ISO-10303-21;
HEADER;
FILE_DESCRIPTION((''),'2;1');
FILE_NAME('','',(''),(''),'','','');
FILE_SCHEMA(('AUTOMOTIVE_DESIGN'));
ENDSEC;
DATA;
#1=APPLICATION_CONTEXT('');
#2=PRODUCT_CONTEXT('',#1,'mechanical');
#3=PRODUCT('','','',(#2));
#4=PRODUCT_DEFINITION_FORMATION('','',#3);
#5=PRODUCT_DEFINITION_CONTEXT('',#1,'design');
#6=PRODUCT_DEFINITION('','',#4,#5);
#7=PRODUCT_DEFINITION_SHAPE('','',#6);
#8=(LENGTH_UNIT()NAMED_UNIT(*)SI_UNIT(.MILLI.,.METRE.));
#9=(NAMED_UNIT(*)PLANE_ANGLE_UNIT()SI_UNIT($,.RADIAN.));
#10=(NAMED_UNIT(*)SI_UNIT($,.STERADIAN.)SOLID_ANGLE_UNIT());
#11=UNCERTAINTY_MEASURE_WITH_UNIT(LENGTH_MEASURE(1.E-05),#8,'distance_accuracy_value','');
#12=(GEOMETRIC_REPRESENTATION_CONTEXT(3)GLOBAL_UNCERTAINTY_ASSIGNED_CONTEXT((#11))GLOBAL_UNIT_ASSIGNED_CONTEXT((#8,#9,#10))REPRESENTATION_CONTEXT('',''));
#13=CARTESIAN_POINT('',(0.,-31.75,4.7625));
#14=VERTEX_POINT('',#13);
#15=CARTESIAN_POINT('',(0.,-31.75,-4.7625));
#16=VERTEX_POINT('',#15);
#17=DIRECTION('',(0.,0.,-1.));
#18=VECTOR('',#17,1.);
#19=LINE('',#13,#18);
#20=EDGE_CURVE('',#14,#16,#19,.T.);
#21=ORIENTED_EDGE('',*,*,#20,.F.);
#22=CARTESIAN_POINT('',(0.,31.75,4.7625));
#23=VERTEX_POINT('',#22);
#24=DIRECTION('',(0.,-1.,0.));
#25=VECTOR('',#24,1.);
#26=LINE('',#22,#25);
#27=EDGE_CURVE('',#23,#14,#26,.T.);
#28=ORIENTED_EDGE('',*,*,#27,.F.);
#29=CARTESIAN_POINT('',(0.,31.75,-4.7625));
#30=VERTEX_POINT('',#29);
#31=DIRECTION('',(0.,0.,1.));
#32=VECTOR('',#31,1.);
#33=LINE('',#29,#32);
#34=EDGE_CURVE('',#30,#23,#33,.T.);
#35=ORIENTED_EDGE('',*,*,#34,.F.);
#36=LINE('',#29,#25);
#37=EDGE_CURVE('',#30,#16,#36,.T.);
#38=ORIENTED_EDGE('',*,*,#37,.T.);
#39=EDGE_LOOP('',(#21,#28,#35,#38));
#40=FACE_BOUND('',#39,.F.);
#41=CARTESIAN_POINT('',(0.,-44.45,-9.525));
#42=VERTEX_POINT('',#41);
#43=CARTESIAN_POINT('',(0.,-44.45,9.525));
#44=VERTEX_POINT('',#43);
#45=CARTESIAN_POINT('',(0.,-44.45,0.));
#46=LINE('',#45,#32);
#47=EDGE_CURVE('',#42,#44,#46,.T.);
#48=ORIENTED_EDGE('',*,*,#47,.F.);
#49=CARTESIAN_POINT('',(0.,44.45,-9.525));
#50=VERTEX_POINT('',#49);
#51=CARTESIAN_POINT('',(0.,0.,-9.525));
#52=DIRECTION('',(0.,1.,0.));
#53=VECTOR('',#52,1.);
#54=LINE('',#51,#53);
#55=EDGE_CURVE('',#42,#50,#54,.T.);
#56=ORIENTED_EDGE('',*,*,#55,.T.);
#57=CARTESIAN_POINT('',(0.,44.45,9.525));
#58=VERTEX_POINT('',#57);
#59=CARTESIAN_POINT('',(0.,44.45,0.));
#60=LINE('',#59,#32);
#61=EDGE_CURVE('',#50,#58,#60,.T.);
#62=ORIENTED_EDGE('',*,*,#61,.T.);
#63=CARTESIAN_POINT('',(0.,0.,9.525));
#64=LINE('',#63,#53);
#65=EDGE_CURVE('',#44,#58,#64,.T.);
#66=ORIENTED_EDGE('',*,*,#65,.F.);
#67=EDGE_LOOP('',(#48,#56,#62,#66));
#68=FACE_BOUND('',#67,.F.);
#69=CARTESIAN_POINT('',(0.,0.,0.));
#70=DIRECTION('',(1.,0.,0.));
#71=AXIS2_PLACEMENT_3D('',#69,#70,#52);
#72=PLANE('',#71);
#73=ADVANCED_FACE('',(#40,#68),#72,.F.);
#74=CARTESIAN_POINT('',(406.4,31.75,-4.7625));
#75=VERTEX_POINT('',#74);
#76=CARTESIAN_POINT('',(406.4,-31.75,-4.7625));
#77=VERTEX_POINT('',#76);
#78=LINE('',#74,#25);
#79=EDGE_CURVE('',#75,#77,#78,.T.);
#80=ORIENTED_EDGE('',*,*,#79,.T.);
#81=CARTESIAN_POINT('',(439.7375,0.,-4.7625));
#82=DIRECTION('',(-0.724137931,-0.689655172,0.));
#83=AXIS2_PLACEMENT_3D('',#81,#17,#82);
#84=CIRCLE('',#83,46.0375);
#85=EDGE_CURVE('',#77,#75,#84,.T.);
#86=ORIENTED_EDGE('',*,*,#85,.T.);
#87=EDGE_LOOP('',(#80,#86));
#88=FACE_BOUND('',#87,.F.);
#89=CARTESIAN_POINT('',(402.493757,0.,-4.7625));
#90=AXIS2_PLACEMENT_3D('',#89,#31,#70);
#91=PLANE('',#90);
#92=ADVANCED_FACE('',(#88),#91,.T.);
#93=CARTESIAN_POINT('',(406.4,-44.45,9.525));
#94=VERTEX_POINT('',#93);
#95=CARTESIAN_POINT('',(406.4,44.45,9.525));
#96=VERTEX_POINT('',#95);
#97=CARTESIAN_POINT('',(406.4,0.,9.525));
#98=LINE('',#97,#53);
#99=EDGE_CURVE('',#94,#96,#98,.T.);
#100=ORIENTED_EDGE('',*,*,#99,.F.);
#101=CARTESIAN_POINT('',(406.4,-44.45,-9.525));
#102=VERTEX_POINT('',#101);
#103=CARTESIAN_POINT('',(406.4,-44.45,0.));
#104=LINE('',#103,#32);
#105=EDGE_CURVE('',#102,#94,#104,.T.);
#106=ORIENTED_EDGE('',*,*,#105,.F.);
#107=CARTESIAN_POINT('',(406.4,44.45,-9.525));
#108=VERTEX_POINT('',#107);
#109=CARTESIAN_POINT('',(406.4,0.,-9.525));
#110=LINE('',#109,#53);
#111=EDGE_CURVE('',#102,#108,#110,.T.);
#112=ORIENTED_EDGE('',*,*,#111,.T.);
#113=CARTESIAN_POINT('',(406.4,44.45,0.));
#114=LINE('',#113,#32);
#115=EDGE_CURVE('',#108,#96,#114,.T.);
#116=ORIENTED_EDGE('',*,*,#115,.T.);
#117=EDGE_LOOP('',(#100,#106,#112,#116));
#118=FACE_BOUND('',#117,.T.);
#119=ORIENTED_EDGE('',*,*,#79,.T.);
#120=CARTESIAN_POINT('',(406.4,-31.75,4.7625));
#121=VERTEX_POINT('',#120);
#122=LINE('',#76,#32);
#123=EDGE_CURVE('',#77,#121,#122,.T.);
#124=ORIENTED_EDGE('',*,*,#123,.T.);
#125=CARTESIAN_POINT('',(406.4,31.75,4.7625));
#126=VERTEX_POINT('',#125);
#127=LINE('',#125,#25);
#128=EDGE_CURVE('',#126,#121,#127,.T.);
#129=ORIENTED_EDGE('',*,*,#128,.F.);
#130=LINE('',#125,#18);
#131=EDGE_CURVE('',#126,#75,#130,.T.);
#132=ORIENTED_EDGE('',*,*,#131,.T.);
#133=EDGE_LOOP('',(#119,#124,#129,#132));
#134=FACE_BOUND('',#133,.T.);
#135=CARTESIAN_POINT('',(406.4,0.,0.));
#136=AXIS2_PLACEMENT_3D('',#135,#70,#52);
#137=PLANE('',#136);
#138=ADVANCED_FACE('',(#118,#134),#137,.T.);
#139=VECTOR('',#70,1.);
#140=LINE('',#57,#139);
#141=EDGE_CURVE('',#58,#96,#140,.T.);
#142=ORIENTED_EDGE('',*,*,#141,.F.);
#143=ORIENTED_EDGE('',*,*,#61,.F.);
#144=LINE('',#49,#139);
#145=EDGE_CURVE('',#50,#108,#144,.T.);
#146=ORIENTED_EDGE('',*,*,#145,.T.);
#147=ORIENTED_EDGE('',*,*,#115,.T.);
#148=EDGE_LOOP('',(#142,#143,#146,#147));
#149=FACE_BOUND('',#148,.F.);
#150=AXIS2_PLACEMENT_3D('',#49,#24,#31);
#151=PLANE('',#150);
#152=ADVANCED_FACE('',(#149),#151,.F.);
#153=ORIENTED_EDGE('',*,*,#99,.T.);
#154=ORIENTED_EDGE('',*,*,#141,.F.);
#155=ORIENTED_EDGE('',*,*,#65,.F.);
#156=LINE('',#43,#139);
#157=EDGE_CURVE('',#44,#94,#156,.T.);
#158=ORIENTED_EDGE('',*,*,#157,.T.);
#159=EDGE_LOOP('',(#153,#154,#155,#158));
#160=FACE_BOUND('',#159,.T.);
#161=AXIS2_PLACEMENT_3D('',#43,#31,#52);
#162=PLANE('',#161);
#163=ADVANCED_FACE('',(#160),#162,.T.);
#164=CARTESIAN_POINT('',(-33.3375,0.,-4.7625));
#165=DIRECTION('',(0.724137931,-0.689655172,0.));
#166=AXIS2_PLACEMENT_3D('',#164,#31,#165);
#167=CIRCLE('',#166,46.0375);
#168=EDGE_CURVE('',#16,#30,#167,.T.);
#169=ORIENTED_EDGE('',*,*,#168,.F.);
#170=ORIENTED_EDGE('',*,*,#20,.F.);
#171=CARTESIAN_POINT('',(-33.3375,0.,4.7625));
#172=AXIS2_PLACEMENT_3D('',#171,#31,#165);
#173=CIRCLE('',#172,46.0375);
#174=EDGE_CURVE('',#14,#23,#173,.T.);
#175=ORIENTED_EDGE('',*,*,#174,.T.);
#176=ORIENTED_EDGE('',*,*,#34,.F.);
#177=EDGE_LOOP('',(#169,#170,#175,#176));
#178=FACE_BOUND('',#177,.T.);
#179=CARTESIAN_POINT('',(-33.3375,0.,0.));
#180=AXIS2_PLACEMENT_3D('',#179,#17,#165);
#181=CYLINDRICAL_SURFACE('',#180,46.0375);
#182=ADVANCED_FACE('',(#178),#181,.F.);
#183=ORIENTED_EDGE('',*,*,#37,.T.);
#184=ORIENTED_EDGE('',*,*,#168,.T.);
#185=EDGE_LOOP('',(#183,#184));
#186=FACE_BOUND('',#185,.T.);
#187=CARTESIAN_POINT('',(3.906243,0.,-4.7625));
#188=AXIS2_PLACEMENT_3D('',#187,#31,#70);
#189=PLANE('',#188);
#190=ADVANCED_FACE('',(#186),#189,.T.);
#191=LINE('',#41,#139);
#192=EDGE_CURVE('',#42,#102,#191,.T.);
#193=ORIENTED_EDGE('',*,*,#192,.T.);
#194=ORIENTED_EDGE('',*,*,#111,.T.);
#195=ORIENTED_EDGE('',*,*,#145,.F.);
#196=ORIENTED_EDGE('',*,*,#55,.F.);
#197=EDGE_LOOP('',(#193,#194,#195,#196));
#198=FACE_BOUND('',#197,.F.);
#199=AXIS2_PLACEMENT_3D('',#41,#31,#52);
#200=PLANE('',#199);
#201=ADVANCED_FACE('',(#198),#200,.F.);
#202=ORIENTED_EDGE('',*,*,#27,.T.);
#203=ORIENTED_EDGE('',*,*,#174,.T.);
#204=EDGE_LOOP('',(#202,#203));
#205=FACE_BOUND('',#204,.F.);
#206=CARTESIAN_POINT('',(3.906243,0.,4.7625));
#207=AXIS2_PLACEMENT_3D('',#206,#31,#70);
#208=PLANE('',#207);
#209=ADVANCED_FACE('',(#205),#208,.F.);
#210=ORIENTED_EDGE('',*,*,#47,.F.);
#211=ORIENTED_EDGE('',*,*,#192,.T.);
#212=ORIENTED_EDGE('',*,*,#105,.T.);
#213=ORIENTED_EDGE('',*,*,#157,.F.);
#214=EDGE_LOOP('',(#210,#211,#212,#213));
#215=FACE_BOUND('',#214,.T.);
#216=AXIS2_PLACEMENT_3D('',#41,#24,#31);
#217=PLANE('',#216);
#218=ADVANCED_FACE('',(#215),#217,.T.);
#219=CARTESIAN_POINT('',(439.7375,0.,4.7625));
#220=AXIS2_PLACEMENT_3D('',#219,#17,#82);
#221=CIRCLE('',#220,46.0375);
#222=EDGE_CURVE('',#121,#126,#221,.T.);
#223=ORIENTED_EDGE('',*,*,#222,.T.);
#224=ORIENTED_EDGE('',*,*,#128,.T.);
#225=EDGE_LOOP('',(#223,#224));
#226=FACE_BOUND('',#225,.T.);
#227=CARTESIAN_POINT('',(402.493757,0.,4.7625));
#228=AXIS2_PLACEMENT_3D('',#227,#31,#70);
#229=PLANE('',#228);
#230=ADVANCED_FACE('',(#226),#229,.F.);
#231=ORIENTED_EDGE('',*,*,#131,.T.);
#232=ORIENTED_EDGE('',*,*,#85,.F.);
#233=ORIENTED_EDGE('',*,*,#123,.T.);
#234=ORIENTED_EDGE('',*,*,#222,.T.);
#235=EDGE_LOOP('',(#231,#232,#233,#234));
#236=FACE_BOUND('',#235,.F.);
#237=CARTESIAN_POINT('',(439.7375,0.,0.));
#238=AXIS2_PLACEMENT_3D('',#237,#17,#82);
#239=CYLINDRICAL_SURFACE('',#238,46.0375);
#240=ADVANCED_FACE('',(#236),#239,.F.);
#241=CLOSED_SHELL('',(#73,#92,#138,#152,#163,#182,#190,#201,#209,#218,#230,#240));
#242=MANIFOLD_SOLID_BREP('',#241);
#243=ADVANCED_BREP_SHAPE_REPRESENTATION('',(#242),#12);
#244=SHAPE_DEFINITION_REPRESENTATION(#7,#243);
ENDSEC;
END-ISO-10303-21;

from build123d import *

# Parameters (mm, degrees)
F0_W          = 88.9
F0_H          = 19.05
F1_DEPTH      = 406.4
F3_DEPTH      = 4.7625
F3_DEPTH_BACK = 4.7625


# Not quite as in the source:
# - a pattern or mirror of a feature is missing from the dataset's text; its kind, count and spacing are read off the source's solid


with BuildPart() as f1:
    # F0 (on Right) → F1 (new body)
    with BuildSketch(Plane.YZ):
        Rectangle(F0_W, F0_H)
    extrude(amount=F1_DEPTH)

    # F2 (on Top) → F3 (cut, two sides)
    with BuildSketch(Plane.XY) as f3_sk:
        with BuildLine():
            Line((0, 31.75), (0, -31.75))
            ThreePointArc((0, -31.75), (12.7, 0), (0, 31.75))
        make_face()
    f3 = extrude(amount=F3_DEPTH, mode=Mode.SUBTRACT) + extrude(f3_sk.sketch, amount=-F3_DEPTH_BACK, mode=Mode.SUBTRACT)

    # F3_copies: F3 across plane
    add(f3.mirror(Plane(origin=(203.2, 0, 0), x_dir=(0, 0, 1), z_dir=(1, 0, 0))), mode=Mode.SUBTRACT)


solid = f1.part
